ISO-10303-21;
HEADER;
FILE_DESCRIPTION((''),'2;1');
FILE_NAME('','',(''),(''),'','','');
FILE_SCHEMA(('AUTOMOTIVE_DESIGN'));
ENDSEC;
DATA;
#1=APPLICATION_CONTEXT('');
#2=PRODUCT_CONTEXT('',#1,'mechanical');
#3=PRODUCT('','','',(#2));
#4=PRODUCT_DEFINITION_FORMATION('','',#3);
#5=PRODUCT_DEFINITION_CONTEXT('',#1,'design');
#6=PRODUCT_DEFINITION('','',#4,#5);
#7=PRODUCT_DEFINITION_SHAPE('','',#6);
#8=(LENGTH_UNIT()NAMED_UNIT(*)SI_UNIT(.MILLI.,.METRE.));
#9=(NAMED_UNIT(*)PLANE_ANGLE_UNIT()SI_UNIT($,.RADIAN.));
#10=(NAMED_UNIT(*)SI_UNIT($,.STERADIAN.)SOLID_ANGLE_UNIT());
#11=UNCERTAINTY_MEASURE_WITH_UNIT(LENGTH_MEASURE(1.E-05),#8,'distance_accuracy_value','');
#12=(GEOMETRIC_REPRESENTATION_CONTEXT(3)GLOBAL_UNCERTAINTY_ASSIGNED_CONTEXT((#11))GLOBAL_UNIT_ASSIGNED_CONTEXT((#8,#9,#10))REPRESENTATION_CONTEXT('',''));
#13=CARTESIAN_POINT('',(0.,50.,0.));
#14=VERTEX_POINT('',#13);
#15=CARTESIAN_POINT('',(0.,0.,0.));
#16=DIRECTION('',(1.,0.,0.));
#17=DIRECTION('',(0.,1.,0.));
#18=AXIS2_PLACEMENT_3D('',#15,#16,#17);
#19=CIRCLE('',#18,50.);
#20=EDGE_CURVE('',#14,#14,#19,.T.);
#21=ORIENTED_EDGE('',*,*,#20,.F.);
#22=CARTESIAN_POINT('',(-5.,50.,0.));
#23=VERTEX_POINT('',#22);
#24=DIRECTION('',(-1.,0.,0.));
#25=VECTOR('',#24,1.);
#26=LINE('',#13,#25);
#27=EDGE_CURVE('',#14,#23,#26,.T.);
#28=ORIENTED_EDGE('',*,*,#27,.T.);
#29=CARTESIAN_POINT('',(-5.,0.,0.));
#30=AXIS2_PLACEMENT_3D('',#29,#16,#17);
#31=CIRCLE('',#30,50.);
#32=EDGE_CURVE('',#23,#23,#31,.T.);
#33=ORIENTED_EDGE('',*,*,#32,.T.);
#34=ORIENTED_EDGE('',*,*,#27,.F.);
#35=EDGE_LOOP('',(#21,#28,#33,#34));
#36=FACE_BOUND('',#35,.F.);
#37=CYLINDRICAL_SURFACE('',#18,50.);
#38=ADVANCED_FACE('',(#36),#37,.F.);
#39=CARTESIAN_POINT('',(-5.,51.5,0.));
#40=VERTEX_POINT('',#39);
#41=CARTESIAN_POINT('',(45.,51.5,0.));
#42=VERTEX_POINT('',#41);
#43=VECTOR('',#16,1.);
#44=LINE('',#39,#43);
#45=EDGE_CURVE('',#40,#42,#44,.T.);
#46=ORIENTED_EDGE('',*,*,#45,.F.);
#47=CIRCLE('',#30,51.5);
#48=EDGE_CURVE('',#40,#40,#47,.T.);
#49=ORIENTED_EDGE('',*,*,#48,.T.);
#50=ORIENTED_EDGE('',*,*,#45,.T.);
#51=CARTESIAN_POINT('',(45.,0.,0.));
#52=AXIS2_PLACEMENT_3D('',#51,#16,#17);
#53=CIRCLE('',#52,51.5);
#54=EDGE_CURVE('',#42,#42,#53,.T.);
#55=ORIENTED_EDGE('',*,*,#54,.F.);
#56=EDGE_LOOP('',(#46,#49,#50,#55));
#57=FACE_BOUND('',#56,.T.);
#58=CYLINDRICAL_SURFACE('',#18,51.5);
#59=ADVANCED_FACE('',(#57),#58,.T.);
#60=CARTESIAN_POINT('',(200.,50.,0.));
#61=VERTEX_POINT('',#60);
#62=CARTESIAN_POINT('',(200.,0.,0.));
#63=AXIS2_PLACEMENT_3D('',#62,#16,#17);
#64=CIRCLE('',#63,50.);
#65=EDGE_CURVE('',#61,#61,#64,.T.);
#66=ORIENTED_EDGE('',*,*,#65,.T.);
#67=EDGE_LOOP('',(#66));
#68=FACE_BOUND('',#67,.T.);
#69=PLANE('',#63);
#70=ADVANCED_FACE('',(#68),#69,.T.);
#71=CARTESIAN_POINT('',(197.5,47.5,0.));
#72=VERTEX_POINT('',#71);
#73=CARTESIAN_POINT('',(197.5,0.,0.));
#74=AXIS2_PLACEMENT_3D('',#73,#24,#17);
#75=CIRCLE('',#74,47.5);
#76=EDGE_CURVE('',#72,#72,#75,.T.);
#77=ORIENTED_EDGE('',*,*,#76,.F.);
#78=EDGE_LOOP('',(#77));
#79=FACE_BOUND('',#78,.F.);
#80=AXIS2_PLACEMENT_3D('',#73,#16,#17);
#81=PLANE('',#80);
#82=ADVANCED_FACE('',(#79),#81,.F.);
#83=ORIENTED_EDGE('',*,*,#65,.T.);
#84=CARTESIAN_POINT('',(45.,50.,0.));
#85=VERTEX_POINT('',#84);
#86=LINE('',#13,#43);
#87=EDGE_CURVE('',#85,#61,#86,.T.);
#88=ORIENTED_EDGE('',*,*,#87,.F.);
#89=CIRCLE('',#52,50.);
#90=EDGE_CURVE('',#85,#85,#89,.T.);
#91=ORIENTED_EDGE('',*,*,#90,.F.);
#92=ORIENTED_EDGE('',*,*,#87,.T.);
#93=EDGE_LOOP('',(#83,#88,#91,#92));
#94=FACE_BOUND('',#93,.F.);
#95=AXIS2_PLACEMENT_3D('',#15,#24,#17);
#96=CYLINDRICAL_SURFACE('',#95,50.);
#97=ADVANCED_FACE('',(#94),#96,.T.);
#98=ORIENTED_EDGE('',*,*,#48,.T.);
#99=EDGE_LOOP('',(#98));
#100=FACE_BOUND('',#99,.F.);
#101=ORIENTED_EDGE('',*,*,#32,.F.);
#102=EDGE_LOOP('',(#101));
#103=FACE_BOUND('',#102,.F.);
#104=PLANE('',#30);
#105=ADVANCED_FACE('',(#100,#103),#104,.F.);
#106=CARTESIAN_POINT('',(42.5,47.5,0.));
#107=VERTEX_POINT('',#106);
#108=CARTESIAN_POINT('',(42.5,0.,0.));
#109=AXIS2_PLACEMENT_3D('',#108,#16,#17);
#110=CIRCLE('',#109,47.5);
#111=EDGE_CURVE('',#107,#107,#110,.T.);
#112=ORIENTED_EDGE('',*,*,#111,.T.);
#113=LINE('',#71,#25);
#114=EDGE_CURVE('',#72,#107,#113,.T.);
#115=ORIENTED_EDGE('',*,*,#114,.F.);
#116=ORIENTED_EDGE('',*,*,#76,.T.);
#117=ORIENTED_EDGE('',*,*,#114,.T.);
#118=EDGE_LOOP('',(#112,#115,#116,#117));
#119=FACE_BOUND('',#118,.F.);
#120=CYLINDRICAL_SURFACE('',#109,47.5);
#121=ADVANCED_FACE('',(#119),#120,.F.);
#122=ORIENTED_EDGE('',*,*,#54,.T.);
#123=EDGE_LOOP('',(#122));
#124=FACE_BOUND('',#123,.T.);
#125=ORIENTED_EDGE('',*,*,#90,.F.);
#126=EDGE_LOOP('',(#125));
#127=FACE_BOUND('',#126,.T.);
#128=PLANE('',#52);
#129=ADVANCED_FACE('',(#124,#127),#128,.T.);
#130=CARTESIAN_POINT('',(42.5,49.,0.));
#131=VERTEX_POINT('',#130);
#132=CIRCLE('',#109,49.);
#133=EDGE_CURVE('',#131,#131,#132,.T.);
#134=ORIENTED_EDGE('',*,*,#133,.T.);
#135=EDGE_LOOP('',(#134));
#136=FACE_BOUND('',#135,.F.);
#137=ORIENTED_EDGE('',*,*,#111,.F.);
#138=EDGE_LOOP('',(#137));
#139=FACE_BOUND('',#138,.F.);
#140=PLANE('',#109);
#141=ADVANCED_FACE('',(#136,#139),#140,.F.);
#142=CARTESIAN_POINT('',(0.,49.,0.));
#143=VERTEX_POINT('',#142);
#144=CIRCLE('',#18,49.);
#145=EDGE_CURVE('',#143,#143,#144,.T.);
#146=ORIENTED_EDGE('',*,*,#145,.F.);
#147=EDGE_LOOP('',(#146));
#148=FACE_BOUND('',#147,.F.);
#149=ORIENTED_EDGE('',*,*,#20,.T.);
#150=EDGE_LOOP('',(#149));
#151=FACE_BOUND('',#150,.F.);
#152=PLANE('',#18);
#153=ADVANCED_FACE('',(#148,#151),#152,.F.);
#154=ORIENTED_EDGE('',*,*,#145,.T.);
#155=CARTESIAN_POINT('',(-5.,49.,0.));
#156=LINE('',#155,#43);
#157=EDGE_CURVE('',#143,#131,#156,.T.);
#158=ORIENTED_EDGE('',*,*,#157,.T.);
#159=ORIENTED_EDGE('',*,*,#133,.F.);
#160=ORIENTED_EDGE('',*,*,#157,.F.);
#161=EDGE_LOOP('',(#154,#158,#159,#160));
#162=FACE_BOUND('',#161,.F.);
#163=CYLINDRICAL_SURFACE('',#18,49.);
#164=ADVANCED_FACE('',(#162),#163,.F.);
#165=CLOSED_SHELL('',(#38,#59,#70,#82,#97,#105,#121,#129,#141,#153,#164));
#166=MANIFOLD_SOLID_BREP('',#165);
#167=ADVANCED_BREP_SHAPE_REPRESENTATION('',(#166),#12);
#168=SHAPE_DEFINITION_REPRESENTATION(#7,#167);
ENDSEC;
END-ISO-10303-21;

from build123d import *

# Parameters (mm, degrees)
F0_R     = 51.5
F0_R_2   = 50
F1_DEPTH = 45
F2_DEPTH = 200
F3_DEPTH = 5
F4_T     = 2.5


# Not quite as in the source:
# - a shell that OpenCascade refuses in one call is made with other operations: the cavity is built on its own and cut out


with BuildPart() as f1:
    # F0 (on Right) → F1 (new body)
    with BuildSketch(Plane.YZ):
        Circle(F0_R)
        Circle(F0_R_2, mode=Mode.SUBTRACT)
    extrude(amount=F1_DEPTH)

    # F0 (on Right) → F2 (join)
    with BuildSketch(Plane.YZ):
        Circle(F0_R_2)
    extrude(amount=F2_DEPTH)

    # F0 (on Right) → F3 (join)
    with BuildSketch(Plane.YZ):
        Circle(F0_R)
        Circle(F0_R_2, mode=Mode.SUBTRACT)
    extrude(amount=-F3_DEPTH)

    # F4: shell of thickness 2.5, made by hand


with BuildPart() as f4_core1:
    # F4_t2: copy of F1
    add(f1.part)

    # the walls: a layer under each face that stays
    f4_faces = [f4_core1.faces().sort_by_distance(p)[0] for p in [
        (22.5, -51.5, 0),
        (-2.5, -51.5, 0),
        (45, 45.0625, -24.7962962963),
        (-5, 45.0625, -24.7962962963),
        (122.5, -50, 0),
        (-2.5, -50, 0),
        (200, 0, 0),
    ]]
    thicken(f4_faces, amount=-F4_T, mode=Mode.SUBTRACT)

    # F4_s3 → F4_t4 (revolve, cut)
    with BuildSketch(Plane.XY):
        Polygon((45.025, 50.025), (42.5, 50), (42.5, 47.5), (45, 47.5), align=None)
    revolve(axis=Axis((45, 0, 0), (1, 0, 0)), mode=Mode.SUBTRACT)


with BuildPart() as f1_1:
    add(f1.part)

    # what is left inside the walls is the cavity
    f4_cavity = [f4_core1.part.solids().sort_by_distance(p)[0] for p in [
        (146.666667, -47.475, 0),
    ]]
    add(f4_cavity, mode=Mode.SUBTRACT)


solid = f1_1.part
